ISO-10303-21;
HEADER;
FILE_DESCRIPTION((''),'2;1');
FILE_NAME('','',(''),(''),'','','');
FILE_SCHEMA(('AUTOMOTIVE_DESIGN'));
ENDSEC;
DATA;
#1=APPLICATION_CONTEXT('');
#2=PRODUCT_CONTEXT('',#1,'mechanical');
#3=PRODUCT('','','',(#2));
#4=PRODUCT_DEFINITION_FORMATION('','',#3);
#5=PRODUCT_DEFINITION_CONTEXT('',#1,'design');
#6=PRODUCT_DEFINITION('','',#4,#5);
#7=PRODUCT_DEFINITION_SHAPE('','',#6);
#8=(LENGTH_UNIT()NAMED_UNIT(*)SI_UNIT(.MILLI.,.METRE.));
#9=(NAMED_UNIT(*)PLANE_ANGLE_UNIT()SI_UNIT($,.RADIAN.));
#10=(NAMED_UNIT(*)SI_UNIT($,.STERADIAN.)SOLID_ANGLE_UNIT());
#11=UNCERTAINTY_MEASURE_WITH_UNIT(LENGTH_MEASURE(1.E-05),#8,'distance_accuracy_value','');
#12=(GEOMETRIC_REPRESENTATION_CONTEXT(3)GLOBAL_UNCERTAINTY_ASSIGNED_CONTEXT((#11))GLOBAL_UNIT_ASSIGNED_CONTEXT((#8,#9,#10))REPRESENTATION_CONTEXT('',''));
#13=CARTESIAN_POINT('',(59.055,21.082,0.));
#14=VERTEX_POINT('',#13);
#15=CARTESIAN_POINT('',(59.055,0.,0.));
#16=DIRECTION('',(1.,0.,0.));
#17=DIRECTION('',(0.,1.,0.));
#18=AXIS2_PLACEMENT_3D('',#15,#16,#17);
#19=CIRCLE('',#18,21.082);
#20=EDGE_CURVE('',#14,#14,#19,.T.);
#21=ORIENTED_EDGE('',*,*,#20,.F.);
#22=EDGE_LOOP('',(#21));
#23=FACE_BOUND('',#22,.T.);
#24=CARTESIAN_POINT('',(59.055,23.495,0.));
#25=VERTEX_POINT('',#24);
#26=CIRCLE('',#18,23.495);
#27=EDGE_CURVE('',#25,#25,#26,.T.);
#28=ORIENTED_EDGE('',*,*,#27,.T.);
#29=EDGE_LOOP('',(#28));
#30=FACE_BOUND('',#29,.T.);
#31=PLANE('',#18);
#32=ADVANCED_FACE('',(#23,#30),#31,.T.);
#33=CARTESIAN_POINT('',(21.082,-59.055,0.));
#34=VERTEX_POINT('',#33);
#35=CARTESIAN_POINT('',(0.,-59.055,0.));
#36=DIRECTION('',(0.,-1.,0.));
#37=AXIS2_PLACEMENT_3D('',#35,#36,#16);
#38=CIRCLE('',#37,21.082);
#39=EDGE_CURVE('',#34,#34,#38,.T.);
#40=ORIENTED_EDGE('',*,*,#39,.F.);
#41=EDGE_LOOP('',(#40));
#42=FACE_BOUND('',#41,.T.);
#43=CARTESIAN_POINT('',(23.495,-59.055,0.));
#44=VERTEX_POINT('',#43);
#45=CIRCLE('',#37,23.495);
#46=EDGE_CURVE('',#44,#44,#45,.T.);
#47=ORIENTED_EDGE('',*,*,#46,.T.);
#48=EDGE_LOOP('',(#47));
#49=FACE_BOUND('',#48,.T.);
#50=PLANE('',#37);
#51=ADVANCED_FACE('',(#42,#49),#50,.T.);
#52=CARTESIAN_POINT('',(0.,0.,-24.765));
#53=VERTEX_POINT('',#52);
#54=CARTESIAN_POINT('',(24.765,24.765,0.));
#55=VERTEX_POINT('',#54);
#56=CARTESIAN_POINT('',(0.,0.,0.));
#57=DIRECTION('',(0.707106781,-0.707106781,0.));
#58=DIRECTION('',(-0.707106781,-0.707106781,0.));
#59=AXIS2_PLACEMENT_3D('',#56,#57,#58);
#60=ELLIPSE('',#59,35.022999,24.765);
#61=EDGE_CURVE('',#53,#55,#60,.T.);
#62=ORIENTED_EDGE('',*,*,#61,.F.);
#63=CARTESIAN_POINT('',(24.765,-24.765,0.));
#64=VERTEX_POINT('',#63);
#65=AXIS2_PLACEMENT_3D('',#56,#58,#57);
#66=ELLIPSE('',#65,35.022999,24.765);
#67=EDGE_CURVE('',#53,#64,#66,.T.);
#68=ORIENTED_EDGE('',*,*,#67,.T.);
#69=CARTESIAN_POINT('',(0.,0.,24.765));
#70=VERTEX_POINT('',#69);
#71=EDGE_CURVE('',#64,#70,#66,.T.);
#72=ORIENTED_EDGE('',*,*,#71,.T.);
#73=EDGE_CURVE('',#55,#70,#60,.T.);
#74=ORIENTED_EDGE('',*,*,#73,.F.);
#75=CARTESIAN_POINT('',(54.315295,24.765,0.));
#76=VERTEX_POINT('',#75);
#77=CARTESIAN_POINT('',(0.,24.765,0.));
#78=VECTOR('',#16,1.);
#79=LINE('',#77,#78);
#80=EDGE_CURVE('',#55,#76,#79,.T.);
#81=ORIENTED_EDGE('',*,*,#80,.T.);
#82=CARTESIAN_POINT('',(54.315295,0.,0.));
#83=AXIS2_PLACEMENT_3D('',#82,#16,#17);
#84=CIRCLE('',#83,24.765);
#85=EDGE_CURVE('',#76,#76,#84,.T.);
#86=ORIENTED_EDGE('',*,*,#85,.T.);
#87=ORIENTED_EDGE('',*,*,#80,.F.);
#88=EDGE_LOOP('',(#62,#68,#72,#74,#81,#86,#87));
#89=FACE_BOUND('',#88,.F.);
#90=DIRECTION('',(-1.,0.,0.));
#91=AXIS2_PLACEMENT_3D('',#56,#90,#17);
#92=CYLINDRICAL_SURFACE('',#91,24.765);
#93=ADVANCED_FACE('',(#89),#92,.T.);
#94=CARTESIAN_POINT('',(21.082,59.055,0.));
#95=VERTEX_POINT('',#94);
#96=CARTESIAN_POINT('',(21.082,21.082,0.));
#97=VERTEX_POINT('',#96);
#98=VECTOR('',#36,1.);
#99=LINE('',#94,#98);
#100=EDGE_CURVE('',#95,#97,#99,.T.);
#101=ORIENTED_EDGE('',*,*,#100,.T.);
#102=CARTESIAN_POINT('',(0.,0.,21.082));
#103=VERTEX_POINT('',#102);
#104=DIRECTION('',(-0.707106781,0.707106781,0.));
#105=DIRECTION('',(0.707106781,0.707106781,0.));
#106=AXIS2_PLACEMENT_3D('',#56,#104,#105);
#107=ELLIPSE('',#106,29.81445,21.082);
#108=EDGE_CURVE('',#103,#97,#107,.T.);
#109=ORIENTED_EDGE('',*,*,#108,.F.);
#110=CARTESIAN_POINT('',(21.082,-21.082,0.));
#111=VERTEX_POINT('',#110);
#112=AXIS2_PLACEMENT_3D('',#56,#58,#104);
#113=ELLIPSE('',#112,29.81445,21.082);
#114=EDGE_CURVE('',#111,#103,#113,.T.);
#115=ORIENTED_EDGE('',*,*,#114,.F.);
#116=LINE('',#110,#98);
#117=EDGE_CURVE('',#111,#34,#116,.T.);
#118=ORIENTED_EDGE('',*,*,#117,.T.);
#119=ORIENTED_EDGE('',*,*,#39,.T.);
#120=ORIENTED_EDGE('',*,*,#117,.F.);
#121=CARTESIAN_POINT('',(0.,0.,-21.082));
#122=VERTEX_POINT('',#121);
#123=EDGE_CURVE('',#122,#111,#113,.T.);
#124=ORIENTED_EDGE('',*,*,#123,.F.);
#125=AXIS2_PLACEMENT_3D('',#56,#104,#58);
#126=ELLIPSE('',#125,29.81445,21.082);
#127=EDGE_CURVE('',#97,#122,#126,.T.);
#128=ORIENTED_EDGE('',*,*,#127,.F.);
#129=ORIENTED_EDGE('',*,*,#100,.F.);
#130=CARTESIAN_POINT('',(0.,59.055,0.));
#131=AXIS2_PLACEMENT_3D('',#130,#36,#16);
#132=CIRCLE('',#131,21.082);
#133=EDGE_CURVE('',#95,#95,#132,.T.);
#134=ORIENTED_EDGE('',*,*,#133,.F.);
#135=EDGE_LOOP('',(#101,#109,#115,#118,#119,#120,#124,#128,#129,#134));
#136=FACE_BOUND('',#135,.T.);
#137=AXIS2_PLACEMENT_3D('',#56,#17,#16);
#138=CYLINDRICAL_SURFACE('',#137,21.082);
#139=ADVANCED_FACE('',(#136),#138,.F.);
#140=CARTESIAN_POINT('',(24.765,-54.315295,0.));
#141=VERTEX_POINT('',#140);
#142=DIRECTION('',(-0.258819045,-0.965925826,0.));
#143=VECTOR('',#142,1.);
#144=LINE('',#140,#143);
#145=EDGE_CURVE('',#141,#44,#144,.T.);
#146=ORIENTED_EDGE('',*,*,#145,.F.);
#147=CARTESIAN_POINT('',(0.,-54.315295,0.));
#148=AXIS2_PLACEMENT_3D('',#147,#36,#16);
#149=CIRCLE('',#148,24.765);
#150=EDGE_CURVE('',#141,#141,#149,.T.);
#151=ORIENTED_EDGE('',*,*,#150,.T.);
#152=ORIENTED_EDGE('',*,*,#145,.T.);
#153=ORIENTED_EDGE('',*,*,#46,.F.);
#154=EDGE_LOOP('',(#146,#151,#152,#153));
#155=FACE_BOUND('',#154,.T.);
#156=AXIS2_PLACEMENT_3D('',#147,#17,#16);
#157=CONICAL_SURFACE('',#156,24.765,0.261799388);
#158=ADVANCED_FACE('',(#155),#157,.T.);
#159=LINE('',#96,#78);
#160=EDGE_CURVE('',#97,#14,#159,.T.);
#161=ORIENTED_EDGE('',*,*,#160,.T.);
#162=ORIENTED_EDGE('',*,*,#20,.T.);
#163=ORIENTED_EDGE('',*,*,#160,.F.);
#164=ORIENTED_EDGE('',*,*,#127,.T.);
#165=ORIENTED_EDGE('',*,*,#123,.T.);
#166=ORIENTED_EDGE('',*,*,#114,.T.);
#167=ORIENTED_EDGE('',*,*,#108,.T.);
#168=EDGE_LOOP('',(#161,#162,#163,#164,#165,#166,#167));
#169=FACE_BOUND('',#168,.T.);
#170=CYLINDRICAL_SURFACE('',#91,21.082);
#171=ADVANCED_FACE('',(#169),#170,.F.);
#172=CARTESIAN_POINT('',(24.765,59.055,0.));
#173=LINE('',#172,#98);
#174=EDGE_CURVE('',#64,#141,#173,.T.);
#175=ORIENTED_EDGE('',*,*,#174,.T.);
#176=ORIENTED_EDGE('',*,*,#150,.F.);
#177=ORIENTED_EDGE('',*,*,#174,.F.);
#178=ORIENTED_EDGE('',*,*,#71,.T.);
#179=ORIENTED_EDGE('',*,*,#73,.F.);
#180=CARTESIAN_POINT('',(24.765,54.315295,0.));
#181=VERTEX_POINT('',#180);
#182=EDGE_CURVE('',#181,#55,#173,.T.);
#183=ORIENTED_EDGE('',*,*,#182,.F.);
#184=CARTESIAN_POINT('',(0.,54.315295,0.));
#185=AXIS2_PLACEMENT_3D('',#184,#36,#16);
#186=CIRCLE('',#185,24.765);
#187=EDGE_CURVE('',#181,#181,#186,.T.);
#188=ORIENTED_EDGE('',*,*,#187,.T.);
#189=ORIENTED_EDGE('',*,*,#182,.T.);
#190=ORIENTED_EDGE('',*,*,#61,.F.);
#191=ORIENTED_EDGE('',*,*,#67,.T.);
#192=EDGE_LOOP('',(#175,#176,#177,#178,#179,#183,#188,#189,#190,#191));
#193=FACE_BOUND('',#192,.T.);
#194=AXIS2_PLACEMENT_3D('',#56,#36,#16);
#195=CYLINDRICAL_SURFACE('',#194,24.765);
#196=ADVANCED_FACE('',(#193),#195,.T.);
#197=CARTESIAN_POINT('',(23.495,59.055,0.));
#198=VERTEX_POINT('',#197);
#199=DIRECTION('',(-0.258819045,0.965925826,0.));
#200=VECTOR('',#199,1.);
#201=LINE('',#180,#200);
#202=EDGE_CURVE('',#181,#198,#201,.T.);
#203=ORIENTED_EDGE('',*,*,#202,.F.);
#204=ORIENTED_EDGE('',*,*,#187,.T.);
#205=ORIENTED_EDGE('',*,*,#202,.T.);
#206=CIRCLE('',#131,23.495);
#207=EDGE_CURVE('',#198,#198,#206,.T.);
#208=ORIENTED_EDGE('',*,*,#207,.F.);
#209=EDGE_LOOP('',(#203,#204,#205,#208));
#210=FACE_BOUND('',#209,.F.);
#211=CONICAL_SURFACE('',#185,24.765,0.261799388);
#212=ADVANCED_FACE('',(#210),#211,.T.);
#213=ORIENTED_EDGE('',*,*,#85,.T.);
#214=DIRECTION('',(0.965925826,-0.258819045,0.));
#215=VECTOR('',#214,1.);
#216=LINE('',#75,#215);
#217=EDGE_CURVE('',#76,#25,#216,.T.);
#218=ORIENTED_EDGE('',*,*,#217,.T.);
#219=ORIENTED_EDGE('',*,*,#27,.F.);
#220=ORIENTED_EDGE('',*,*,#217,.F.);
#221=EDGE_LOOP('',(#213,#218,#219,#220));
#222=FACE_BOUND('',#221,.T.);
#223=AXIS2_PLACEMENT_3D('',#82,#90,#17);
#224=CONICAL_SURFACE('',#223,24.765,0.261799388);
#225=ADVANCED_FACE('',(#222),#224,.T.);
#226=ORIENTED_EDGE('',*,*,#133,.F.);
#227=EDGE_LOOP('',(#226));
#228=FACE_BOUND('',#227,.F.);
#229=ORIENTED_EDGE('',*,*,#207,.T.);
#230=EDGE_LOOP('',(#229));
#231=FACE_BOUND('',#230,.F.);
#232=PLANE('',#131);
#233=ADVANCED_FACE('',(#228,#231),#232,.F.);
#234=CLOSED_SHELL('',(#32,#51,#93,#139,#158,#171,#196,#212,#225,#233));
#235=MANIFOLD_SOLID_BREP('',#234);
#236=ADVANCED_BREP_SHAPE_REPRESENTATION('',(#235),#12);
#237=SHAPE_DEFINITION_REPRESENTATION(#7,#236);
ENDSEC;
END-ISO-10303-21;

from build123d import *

# Parameters (mm, degrees)
F0_R          = 24.765
F0_R_2        = 21.082
F1_DEPTH      = 59.055
F2_R          = 24.765
F2_R_2        = 21.082
F3_DEPTH      = 59.055
F4_DEPTH      = 59.0560001
F5_DEPTH      = 59.0560001
F5_DEPTH_BACK = 59.0560001
F6_SIZE2      = 1.27
F6_SIZE       = 4.7397045256
F6_2_SIZE2    = 1.27
F6_2_SIZE     = 4.7397045256


# Not quite as in the source:
# - two fillets or chamfers of one size are made in one step


with BuildPart() as f1:
    # F0 (on Front) → F1 (new body, symmetric)
    with BuildSketch(Plane.XZ):
        Circle(F0_R)
        Circle(F0_R_2, mode=Mode.SUBTRACT)
    extrude(amount=F1_DEPTH, both=True)

    # F2 (on Right) → F3 (join)
    with BuildSketch(Plane.YZ):
        Circle(F2_R)
        Circle(F2_R_2, mode=Mode.SUBTRACT)
    extrude(amount=F3_DEPTH)

    # F2 (on Right) → F4 (cut, through all)
    with BuildSketch(Plane.YZ):
        Circle(F2_R_2)
    extrude(amount=F4_DEPTH, mode=Mode.SUBTRACT)

    # F0 (on Front) → F5 (cut, two sides)
    with BuildSketch(Plane.XZ) as f5_sk:
        Circle(F0_R_2)
    extrude(amount=F5_DEPTH, mode=Mode.SUBTRACT)
    extrude(f5_sk.sketch, amount=-F5_DEPTH_BACK, mode=Mode.SUBTRACT)

    # F6
    f6_edges = [f1.edges().sort_by_distance(p)[0] for p in [
        (-24.765, -59.055, 0),
        (-24.765, 59.055, 0),
    ]]
    f6_side = f1.faces().sort_by_distance((-24.765, 0, 0))[0]
    chamfer(f6_edges, length=F6_SIZE, length2=F6_SIZE2, reference=f6_side)

    # F6#2
    f6_2_edges = [f1.edges().sort_by_distance(p)[0] for p in [
        (59.055, -24.765, 0),
    ]]
    f6_2_side = f1.faces().sort_by_distance((29.5275, -24.765, 0))[0]
    chamfer(f6_2_edges, length=F6_2_SIZE, length2=F6_2_SIZE2, reference=f6_2_side)


solid = f1.part
